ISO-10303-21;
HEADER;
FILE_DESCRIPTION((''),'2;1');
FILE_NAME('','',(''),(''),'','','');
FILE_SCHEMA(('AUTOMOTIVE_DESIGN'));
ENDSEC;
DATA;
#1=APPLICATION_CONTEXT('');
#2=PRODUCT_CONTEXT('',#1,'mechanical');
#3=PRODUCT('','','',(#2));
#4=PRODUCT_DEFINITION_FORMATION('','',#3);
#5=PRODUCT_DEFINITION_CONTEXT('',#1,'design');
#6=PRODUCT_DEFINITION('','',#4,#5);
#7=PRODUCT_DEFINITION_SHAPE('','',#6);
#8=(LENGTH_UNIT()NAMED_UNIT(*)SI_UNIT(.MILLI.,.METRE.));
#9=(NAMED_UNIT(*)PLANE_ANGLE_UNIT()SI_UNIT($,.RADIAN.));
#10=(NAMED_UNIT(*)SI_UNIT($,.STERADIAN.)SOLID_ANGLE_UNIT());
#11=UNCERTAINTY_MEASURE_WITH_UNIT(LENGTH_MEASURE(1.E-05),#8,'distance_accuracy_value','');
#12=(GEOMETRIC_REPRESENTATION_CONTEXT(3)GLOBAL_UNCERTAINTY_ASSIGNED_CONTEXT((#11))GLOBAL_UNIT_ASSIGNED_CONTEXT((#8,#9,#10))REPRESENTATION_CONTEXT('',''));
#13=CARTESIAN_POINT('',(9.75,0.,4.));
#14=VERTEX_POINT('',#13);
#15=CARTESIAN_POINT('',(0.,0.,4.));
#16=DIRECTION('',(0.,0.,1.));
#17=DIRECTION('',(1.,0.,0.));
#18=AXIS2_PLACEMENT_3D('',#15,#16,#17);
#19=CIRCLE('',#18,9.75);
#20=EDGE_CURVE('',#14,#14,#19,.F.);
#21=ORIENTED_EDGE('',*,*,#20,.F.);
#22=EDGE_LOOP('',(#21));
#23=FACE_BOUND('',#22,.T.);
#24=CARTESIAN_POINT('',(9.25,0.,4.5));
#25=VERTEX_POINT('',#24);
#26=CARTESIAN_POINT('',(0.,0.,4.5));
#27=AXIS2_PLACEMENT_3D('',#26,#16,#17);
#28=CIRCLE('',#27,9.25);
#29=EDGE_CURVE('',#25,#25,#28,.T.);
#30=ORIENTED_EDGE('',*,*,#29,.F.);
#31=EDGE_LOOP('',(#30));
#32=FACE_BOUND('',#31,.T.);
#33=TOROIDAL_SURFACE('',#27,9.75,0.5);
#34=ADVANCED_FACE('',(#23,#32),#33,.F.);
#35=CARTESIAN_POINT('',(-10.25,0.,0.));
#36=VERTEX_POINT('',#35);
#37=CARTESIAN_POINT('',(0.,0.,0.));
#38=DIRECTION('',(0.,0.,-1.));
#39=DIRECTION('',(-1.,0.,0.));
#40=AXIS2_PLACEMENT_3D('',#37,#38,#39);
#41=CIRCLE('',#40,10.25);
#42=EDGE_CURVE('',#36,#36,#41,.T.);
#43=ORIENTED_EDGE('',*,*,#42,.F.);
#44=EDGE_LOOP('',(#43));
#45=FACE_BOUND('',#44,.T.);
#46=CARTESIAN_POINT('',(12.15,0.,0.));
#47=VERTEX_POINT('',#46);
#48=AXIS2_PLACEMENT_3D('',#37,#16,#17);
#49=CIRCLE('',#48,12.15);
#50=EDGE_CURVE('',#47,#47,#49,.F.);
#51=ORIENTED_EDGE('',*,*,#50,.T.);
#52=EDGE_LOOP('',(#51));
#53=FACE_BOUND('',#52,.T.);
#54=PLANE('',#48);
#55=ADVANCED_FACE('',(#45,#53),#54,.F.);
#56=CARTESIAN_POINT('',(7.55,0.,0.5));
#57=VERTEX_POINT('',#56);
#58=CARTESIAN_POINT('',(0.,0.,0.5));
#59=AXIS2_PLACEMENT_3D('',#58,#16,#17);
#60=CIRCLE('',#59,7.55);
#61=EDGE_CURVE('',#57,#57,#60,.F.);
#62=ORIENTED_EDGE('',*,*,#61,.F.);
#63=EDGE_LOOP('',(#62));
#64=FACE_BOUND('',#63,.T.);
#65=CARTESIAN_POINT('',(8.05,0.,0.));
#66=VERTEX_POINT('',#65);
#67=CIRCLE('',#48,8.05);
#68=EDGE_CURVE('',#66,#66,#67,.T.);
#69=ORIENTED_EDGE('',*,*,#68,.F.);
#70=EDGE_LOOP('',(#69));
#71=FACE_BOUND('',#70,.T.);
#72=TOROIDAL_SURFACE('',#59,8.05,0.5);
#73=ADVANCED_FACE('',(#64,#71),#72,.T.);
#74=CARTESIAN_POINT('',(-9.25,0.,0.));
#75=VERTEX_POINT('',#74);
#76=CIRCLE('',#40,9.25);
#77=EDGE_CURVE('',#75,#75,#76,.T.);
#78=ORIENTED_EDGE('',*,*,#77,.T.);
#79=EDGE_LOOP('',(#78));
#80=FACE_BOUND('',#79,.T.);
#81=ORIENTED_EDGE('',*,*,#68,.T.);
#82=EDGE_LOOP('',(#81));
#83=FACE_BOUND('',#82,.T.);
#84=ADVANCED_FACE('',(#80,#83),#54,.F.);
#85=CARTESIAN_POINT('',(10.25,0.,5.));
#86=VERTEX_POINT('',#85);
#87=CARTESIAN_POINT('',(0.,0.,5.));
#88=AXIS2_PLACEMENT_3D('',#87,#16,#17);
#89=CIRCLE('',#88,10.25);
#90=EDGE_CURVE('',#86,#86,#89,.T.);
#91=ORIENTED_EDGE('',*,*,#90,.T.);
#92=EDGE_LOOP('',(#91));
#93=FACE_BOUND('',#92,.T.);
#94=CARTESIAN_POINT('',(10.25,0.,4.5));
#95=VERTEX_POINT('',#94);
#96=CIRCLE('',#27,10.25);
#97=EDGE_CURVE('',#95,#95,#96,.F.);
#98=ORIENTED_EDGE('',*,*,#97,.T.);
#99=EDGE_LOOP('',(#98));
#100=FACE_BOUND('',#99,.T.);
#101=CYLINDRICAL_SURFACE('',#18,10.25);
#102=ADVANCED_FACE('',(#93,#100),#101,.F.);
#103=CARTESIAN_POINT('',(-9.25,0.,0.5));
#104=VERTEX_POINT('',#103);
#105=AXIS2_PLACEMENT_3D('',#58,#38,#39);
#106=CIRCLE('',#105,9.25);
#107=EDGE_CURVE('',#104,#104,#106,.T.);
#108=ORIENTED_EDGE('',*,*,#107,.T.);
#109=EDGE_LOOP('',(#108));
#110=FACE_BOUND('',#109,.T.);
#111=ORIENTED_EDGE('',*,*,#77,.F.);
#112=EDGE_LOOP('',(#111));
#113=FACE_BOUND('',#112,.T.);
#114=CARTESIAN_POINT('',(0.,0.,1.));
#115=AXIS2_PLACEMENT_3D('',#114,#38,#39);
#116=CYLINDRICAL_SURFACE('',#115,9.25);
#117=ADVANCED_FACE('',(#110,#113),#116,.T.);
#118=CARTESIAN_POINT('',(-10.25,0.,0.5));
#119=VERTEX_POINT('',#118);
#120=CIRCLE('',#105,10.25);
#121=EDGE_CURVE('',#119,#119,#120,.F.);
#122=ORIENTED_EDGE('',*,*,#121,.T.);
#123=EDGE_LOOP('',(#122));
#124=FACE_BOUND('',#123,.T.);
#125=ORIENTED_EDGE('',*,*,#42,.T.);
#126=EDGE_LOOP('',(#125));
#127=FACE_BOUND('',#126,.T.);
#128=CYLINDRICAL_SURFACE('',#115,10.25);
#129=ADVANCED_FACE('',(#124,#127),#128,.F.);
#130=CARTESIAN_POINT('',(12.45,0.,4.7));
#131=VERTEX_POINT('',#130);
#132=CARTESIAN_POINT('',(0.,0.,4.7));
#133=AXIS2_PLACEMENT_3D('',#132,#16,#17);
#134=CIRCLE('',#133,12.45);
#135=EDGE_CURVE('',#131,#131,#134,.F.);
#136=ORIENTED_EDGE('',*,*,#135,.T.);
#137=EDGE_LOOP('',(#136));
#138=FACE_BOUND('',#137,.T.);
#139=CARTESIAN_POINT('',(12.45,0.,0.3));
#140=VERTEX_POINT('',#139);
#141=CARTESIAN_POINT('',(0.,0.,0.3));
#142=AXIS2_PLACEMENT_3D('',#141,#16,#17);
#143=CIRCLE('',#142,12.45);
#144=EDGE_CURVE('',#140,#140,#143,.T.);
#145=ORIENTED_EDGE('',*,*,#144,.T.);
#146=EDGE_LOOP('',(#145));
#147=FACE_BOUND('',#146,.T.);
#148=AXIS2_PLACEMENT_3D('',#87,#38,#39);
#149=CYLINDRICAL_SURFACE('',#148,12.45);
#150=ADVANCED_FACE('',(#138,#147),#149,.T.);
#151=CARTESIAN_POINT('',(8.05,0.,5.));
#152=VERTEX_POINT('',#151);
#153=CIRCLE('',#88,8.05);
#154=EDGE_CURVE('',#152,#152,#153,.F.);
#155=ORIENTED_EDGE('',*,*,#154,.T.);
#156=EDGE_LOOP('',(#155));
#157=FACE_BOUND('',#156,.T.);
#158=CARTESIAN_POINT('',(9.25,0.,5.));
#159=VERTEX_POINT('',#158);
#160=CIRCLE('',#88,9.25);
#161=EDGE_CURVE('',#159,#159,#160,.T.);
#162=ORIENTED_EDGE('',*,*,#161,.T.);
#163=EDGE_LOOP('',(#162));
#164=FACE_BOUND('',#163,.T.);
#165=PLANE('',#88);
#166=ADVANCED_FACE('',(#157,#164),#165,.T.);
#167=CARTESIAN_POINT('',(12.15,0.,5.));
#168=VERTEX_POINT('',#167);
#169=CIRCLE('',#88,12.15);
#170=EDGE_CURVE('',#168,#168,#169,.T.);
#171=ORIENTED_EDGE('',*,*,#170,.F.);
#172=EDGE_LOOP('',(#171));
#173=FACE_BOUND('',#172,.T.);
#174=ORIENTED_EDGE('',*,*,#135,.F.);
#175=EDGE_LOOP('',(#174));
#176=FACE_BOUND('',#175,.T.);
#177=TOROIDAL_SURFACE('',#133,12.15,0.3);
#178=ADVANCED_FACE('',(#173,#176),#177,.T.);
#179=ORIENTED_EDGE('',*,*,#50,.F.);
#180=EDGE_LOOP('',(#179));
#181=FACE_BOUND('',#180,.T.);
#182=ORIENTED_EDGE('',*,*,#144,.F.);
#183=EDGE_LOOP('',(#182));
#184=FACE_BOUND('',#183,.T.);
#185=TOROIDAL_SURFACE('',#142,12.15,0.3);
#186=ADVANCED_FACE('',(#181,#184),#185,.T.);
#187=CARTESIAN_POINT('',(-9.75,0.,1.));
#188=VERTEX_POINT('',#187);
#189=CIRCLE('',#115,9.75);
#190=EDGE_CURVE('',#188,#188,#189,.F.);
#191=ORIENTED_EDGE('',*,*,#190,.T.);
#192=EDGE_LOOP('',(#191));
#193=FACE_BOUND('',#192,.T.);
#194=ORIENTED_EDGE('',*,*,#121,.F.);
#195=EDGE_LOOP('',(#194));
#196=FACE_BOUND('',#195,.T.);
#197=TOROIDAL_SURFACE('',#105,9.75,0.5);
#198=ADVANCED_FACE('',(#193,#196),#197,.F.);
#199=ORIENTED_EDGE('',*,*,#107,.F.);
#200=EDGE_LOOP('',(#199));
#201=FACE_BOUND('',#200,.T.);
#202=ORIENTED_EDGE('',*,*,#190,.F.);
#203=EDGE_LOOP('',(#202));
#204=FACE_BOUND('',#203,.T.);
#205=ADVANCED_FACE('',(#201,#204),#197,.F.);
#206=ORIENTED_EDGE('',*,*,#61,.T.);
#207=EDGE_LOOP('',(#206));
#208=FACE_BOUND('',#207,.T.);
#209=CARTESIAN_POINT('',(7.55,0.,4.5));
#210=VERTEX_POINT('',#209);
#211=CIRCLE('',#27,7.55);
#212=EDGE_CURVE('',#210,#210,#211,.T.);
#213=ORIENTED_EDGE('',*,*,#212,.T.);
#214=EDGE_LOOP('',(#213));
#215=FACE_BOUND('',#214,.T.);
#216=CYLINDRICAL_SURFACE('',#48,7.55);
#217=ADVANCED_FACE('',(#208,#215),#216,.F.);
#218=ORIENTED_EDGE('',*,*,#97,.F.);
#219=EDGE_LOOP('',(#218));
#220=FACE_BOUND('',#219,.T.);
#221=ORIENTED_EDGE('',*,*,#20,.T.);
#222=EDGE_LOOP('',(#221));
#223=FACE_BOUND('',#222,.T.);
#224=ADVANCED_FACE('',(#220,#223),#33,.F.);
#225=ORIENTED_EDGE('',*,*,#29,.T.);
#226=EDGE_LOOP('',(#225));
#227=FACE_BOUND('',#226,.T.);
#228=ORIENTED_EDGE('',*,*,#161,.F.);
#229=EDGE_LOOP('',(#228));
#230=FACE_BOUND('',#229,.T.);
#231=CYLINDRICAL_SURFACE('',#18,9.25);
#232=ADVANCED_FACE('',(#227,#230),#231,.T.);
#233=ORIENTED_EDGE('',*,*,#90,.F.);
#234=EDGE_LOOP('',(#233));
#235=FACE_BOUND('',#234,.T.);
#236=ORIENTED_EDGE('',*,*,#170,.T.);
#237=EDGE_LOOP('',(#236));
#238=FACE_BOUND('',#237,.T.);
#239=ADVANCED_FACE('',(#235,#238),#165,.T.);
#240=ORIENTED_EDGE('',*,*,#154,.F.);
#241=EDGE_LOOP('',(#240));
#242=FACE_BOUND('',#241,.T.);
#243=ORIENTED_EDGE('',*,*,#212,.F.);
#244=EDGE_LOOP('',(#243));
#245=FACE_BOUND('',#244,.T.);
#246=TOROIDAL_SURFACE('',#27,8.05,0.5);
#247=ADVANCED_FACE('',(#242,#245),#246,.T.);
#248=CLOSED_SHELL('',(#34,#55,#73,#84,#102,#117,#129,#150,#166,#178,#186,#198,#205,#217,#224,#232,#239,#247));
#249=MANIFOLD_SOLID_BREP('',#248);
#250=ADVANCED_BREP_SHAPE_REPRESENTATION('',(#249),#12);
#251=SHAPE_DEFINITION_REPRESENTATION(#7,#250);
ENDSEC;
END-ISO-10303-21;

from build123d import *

# Parameters (mm, degrees)
SKETCH1_R           = 12.45
BOSS_EXTRUDE1_DEPTH = 5
SKETCH2_R           = 7.55
CUT_EXTRUDE1_DEPTH  = 19.303141807
FILLET1_R           = 0.5
SKETCH3_R           = 10.25
SKETCH3_R_2         = 9.25
CUT_EXTRUDE2_DEPTH  = 1
FILLET2_R           = 0.5
CUT_EXTRUDE3_START  = -1
SKETCH4_R           = 10.25
SKETCH4_R_2         = 9.25
CUT_EXTRUDE3_DEPTH  = 1
FILLET3_R           = 0.5
FILLET4_R           = 0.3


with BuildPart() as part:
    # Sketch1 → Boss-Extrude1 (new body)
    with BuildSketch(Plane.XY):
        Circle(SKETCH1_R)
    extrude(amount=BOSS_EXTRUDE1_DEPTH)

    # Sketch2 → Cut-Extrude1 (cut, through all)
    with BuildSketch(Plane.XY.offset(5)):
        Circle(SKETCH2_R)
    extrude(amount=-CUT_EXTRUDE1_DEPTH, mode=Mode.SUBTRACT)

    # Fillet1
    fillet1_edges = [part.edges().sort_by_distance(p)[0] for p in [
        (-7.55, 0, 0),
        (-7.55, 0, 5),
    ]]
    fillet(fillet1_edges, radius=FILLET1_R)

    # Sketch3 → Cut-Extrude2 (cut)
    with BuildSketch(Plane.XY.offset(5)):
        Circle(SKETCH3_R)
        Circle(SKETCH3_R_2, mode=Mode.SUBTRACT)
    extrude(amount=-CUT_EXTRUDE2_DEPTH, mode=Mode.SUBTRACT)

    # Fillet2
    fillet2_edges = [part.edges().sort_by_distance(p)[0] for p in [
        (-10.25, 0, 4),
        (-9.25, 0, 4),
    ]]
    fillet(fillet2_edges, radius=FILLET2_R - 0.0001)  # a hair under: the kernel refuses the full size

    # Sketch4 → Cut-Extrude3 (cut)
    with BuildSketch(Plane(origin=(0, 0, 0), x_dir=(-1, 0, 0), z_dir=(0, 0, -1)).offset(CUT_EXTRUDE3_START)):
        with Locations(Location((0, 0, 0), (0, 0, 180))):
            Circle(SKETCH4_R)
        with Locations(Location((0, 0, 0), (0, 0, 180))):
            Circle(SKETCH4_R_2, mode=Mode.SUBTRACT)
    extrude(amount=CUT_EXTRUDE3_DEPTH, mode=Mode.SUBTRACT)

    # Fillet3
    fillet3_edges = [part.edges().sort_by_distance(p)[0] for p in [
        (-10.25, 0, 1),
        (-9.25, 0, 1),
    ]]
    fillet(fillet3_edges, radius=FILLET3_R - 0.0001)  # a hair under: the kernel refuses the full size

    # Fillet4
    fillet4_edges = [part.edges().sort_by_distance(p)[0] for p in [
        (-12.45, 0, 0),
        (-12.45, 0, 5),
    ]]
    fillet(fillet4_edges, radius=FILLET4_R)


solid = part.part
